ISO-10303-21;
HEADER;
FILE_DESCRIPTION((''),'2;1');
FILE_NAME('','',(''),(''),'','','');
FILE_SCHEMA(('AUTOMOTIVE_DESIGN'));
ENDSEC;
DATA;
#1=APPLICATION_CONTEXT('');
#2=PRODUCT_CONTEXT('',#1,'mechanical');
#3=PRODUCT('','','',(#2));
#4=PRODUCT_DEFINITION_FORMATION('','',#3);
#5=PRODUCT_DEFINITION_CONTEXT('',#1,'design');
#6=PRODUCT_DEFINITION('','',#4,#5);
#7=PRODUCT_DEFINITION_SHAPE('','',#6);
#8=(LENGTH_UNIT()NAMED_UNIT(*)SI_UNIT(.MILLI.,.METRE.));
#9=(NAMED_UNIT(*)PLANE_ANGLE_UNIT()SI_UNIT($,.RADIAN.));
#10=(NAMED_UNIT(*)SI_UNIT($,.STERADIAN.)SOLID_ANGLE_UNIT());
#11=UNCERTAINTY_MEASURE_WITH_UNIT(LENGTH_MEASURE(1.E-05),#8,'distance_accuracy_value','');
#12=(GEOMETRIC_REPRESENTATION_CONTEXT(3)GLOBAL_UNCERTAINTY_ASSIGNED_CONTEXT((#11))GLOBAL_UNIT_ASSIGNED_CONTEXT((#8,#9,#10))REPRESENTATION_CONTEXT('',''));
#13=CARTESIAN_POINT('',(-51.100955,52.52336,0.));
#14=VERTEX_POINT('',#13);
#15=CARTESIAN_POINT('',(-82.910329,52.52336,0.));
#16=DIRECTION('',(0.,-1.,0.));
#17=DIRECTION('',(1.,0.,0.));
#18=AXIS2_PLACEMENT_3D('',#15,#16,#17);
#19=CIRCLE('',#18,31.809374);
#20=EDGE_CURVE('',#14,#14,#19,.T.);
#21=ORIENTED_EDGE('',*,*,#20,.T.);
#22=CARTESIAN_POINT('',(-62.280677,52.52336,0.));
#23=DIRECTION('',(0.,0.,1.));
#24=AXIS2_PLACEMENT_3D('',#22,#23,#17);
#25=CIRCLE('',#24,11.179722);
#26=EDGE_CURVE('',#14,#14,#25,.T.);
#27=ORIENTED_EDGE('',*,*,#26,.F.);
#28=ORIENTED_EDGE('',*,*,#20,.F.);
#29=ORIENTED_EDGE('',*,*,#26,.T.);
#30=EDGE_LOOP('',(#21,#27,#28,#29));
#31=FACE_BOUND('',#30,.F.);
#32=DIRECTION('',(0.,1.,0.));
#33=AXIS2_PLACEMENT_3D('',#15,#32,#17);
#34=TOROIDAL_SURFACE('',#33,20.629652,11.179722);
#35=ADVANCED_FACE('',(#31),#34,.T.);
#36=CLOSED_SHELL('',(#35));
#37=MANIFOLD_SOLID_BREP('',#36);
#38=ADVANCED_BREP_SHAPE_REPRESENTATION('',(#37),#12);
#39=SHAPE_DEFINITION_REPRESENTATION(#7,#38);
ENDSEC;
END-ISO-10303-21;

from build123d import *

# Parameters (mm, degrees)
F0_R = 11.1797222355


# Not quite as in the source:
# - the program builds the solid bodies; features that only make, move or delete a surface that nothing else refers to are left out


with BuildPart() as f2:
    # F0 (on Top) → F2 (revolve)
    with BuildSketch(Plane.XY):
        with Locations((-62.280677259, 52.5233596563)):
            Circle(F0_R)
    revolve(axis=Axis((-82.9103291035, 50.9820729494, 0), (0, -1, 0)))


solid = f2.part
